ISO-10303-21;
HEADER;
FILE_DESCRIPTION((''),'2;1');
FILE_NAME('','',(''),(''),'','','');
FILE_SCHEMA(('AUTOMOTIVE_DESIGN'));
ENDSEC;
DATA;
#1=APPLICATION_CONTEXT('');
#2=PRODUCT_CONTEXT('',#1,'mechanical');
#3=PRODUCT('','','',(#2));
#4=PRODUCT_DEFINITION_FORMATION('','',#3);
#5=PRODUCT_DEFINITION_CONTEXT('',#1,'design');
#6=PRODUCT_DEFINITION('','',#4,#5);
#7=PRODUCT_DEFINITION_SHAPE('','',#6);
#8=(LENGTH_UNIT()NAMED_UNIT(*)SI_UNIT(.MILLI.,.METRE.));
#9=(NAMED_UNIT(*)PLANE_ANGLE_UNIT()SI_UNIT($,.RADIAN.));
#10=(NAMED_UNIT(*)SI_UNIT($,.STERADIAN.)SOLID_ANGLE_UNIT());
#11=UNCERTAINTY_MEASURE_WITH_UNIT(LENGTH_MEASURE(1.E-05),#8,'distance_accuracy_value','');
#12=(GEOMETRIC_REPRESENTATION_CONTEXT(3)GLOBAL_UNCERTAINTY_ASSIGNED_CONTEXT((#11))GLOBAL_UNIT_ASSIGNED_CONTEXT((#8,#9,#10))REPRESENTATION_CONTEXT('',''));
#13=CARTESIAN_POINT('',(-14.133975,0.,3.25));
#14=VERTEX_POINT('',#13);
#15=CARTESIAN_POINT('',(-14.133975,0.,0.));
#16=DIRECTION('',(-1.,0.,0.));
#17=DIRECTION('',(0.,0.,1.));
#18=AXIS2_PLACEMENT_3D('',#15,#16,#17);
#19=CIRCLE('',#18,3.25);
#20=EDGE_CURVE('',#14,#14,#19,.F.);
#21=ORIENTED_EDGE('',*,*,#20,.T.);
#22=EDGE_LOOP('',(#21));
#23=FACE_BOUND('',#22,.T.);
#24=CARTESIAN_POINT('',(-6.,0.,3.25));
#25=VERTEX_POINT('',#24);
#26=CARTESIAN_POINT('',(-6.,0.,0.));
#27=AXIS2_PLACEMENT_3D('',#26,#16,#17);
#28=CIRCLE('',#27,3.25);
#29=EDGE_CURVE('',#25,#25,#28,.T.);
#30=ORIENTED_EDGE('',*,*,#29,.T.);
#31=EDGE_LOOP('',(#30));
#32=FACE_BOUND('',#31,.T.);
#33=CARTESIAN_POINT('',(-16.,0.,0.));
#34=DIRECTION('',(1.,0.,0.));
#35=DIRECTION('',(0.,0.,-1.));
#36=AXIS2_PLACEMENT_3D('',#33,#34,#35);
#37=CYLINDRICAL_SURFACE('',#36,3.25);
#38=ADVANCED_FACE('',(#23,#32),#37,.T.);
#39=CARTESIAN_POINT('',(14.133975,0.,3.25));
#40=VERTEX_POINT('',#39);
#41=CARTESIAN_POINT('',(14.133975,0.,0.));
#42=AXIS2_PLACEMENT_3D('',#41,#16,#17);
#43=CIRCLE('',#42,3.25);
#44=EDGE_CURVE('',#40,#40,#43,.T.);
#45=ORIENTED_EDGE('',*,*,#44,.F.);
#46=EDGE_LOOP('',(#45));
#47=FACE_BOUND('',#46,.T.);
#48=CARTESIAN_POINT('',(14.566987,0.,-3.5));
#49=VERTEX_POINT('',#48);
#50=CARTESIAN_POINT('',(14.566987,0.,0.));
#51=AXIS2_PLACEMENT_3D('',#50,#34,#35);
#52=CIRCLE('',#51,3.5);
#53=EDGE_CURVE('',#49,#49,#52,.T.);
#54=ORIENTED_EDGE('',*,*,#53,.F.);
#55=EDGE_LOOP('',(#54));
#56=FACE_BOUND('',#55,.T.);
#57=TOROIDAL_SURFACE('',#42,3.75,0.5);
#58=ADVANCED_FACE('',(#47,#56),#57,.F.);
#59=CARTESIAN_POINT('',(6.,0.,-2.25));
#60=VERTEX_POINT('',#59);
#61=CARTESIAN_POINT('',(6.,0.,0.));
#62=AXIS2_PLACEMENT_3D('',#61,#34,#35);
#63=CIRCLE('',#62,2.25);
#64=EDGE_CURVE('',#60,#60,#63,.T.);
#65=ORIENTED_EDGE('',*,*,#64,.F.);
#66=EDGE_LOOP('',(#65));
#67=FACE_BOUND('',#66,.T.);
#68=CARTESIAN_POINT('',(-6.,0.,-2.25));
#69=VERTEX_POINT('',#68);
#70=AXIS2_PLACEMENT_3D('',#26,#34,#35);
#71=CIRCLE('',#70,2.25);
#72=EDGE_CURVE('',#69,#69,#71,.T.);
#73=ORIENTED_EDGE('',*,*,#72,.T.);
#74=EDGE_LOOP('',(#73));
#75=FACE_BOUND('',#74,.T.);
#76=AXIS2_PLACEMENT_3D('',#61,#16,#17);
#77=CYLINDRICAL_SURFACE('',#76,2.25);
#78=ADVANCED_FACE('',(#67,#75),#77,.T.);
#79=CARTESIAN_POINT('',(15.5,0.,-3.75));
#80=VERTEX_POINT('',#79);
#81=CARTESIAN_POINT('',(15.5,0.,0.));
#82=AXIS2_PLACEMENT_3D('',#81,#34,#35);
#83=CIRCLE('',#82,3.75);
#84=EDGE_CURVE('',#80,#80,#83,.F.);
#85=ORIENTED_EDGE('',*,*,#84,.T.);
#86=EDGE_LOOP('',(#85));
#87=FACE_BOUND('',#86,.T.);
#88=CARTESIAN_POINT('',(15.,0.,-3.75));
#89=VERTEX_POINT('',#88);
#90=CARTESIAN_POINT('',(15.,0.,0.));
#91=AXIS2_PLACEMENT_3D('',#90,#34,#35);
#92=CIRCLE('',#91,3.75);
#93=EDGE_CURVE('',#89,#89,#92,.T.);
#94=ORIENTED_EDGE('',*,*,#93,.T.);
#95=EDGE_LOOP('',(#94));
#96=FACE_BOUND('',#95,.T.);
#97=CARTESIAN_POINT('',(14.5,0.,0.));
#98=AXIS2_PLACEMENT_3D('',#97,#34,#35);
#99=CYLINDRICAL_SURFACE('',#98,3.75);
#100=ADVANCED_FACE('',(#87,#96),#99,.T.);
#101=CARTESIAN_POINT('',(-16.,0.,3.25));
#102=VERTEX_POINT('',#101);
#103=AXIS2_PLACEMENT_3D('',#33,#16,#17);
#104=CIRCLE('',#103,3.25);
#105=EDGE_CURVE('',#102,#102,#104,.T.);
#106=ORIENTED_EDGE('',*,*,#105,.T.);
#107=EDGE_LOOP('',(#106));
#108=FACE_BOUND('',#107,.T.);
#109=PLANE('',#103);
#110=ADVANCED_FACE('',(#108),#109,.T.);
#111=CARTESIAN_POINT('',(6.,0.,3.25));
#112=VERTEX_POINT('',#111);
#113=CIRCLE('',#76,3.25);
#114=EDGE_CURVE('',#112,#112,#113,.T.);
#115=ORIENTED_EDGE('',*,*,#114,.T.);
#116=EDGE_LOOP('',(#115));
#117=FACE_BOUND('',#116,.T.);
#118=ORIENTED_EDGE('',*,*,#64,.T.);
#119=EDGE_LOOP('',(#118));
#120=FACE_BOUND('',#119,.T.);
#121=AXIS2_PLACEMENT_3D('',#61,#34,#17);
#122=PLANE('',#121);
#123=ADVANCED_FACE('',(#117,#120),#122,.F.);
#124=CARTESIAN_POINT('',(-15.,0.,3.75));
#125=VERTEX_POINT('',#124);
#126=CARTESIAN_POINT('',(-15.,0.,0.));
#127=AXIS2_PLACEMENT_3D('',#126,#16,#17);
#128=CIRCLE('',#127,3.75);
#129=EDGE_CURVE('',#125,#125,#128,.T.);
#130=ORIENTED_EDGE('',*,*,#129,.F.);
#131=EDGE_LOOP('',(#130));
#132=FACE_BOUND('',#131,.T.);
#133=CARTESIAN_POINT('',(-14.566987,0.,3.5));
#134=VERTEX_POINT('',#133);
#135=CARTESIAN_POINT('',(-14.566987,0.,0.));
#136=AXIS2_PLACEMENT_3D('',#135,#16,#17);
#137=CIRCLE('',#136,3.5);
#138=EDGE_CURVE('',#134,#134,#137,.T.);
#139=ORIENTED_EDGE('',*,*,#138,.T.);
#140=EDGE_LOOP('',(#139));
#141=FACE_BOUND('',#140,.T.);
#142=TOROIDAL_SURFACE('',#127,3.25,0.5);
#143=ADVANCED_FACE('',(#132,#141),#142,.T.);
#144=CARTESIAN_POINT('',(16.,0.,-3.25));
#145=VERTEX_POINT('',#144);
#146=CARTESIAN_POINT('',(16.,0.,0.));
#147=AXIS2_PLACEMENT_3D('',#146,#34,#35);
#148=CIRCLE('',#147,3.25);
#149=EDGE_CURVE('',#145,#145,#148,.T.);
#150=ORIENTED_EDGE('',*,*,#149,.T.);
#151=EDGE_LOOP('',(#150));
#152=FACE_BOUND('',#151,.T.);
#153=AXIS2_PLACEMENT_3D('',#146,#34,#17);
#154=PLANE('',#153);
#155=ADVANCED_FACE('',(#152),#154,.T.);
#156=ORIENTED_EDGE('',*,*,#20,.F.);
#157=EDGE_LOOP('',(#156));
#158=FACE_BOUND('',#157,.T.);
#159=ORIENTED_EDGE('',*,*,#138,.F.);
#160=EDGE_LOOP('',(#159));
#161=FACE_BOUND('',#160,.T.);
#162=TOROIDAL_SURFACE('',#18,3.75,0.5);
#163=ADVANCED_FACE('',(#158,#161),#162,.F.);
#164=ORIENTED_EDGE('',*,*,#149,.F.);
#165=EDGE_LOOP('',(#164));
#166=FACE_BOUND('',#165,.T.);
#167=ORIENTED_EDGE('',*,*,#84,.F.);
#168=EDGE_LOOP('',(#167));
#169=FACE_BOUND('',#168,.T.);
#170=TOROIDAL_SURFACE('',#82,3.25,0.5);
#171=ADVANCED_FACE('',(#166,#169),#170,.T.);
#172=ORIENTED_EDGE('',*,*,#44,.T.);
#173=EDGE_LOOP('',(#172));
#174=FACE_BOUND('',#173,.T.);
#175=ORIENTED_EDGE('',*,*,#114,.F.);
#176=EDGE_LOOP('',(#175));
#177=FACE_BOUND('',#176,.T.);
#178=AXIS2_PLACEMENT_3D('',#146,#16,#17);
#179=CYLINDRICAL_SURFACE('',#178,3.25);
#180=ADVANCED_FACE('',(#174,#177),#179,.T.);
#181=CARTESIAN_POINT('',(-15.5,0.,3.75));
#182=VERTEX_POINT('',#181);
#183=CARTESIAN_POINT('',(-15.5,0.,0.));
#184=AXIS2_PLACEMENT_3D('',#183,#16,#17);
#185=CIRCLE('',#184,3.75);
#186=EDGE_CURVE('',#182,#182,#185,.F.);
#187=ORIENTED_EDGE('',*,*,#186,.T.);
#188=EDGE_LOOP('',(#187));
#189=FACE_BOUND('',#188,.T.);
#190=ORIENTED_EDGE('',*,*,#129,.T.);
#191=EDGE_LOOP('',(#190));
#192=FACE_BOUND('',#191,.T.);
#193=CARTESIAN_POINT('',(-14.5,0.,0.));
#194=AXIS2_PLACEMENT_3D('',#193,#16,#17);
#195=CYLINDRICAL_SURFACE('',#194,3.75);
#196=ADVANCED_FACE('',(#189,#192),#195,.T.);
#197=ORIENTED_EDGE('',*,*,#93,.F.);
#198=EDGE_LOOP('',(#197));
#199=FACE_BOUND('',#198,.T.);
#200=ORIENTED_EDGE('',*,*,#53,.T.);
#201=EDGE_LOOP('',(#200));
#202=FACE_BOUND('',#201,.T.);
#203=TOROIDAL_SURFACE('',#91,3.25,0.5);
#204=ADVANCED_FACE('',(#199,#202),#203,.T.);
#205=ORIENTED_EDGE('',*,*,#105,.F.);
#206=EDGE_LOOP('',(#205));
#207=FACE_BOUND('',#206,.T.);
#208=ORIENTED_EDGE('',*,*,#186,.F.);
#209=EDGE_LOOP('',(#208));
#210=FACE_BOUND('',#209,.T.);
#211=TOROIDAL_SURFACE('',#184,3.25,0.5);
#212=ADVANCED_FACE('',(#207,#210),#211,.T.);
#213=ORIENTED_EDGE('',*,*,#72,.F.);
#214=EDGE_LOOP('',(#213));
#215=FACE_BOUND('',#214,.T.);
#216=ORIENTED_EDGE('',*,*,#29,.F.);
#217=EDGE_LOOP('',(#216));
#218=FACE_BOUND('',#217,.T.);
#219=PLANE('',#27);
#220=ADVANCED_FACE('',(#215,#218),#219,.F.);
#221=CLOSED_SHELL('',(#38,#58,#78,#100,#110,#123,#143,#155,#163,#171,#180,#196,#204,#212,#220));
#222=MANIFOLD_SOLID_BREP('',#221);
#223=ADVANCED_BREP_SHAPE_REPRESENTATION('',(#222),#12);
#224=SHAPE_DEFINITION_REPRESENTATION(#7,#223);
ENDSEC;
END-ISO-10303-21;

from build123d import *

# Parameters (mm, degrees)
SKETCH1_R            = 2.25
BOSS_EXTRUDE1_DEPTH  = 6
SKETCH2_R            = 3.25
BOSS_EXTRUDE2_DEPTH  = 10
SKETCH3_R            = 3.75
BOSS_EXTRUDE3_DEPTH  = 1.5
FILLET1_R            = 0.5
FILLET2_R            = 0.5
FILLET1_OF_MIRROR1_R = 0.5
FILLET2_OF_MIRROR1_R = 0.5


with BuildPart() as part:
    # Sketch1 → Boss-Extrude1 (new, symmetric)
    with BuildSketch(Plane(origin=(0, 0, 0), x_dir=(0, 0, -1), z_dir=(1, 0, 0))):
        Circle(SKETCH1_R)
    extrude(amount=BOSS_EXTRUDE1_DEPTH, both=True)

    # Sketch2 → Boss-Extrude2 (add)
    with BuildSketch(Plane.ZY.offset(6)):
        Circle(SKETCH2_R)
    boss_extrude2 = extrude(amount=BOSS_EXTRUDE2_DEPTH)

    # Sketch3 → Boss-Extrude3 (add)
    with BuildSketch(Plane.ZY.offset(16)):
        Circle(SKETCH3_R)
    boss_extrude3 = extrude(amount=-BOSS_EXTRUDE3_DEPTH)

    # Fillet1
    fillet1_edges = [part.edges().sort_by_distance(p)[0] for p in [
        (-14.5, 0, -3.75),
        (-16, 0, -3.75),
    ]]
    fillet(fillet1_edges, radius=FILLET1_R - 0.0001)  # a hair under: the kernel refuses the full size

    # Fillet2
    fillet2_edges = [part.edges().sort_by_distance(p)[0] for p in [
        (-14.5, 0, -3.25),
    ]]
    fillet(fillet2_edges, radius=FILLET2_R)

    # Mirror1: Boss-Extrude2, Boss-Extrude3 across plane
    add(boss_extrude2.mirror(Plane(origin=(0, 0, 0), x_dir=(0, 0, 1), z_dir=(1, 0, 0))))
    add(boss_extrude3.mirror(Plane(origin=(0, 0, 0), x_dir=(0, 0, 1), z_dir=(1, 0, 0))))

    # Fillet1 of Mirror1
    fillet1_of_mirror1_edges = [part.edges().sort_by_distance(p)[0] for p in [
        (14.5, 0, -3.75),
        (16, 0, -3.75),
    ]]
    fillet(fillet1_of_mirror1_edges, radius=FILLET1_OF_MIRROR1_R - 0.0001)  # a hair under: the kernel refuses the full size

    # Fillet2 of Mirror1
    fillet2_of_mirror1_edges = [part.edges().sort_by_distance(p)[0] for p in [
        (14.5, 0, -3.25),
    ]]
    fillet(fillet2_of_mirror1_edges, radius=FILLET2_OF_MIRROR1_R)


solid = part.part
